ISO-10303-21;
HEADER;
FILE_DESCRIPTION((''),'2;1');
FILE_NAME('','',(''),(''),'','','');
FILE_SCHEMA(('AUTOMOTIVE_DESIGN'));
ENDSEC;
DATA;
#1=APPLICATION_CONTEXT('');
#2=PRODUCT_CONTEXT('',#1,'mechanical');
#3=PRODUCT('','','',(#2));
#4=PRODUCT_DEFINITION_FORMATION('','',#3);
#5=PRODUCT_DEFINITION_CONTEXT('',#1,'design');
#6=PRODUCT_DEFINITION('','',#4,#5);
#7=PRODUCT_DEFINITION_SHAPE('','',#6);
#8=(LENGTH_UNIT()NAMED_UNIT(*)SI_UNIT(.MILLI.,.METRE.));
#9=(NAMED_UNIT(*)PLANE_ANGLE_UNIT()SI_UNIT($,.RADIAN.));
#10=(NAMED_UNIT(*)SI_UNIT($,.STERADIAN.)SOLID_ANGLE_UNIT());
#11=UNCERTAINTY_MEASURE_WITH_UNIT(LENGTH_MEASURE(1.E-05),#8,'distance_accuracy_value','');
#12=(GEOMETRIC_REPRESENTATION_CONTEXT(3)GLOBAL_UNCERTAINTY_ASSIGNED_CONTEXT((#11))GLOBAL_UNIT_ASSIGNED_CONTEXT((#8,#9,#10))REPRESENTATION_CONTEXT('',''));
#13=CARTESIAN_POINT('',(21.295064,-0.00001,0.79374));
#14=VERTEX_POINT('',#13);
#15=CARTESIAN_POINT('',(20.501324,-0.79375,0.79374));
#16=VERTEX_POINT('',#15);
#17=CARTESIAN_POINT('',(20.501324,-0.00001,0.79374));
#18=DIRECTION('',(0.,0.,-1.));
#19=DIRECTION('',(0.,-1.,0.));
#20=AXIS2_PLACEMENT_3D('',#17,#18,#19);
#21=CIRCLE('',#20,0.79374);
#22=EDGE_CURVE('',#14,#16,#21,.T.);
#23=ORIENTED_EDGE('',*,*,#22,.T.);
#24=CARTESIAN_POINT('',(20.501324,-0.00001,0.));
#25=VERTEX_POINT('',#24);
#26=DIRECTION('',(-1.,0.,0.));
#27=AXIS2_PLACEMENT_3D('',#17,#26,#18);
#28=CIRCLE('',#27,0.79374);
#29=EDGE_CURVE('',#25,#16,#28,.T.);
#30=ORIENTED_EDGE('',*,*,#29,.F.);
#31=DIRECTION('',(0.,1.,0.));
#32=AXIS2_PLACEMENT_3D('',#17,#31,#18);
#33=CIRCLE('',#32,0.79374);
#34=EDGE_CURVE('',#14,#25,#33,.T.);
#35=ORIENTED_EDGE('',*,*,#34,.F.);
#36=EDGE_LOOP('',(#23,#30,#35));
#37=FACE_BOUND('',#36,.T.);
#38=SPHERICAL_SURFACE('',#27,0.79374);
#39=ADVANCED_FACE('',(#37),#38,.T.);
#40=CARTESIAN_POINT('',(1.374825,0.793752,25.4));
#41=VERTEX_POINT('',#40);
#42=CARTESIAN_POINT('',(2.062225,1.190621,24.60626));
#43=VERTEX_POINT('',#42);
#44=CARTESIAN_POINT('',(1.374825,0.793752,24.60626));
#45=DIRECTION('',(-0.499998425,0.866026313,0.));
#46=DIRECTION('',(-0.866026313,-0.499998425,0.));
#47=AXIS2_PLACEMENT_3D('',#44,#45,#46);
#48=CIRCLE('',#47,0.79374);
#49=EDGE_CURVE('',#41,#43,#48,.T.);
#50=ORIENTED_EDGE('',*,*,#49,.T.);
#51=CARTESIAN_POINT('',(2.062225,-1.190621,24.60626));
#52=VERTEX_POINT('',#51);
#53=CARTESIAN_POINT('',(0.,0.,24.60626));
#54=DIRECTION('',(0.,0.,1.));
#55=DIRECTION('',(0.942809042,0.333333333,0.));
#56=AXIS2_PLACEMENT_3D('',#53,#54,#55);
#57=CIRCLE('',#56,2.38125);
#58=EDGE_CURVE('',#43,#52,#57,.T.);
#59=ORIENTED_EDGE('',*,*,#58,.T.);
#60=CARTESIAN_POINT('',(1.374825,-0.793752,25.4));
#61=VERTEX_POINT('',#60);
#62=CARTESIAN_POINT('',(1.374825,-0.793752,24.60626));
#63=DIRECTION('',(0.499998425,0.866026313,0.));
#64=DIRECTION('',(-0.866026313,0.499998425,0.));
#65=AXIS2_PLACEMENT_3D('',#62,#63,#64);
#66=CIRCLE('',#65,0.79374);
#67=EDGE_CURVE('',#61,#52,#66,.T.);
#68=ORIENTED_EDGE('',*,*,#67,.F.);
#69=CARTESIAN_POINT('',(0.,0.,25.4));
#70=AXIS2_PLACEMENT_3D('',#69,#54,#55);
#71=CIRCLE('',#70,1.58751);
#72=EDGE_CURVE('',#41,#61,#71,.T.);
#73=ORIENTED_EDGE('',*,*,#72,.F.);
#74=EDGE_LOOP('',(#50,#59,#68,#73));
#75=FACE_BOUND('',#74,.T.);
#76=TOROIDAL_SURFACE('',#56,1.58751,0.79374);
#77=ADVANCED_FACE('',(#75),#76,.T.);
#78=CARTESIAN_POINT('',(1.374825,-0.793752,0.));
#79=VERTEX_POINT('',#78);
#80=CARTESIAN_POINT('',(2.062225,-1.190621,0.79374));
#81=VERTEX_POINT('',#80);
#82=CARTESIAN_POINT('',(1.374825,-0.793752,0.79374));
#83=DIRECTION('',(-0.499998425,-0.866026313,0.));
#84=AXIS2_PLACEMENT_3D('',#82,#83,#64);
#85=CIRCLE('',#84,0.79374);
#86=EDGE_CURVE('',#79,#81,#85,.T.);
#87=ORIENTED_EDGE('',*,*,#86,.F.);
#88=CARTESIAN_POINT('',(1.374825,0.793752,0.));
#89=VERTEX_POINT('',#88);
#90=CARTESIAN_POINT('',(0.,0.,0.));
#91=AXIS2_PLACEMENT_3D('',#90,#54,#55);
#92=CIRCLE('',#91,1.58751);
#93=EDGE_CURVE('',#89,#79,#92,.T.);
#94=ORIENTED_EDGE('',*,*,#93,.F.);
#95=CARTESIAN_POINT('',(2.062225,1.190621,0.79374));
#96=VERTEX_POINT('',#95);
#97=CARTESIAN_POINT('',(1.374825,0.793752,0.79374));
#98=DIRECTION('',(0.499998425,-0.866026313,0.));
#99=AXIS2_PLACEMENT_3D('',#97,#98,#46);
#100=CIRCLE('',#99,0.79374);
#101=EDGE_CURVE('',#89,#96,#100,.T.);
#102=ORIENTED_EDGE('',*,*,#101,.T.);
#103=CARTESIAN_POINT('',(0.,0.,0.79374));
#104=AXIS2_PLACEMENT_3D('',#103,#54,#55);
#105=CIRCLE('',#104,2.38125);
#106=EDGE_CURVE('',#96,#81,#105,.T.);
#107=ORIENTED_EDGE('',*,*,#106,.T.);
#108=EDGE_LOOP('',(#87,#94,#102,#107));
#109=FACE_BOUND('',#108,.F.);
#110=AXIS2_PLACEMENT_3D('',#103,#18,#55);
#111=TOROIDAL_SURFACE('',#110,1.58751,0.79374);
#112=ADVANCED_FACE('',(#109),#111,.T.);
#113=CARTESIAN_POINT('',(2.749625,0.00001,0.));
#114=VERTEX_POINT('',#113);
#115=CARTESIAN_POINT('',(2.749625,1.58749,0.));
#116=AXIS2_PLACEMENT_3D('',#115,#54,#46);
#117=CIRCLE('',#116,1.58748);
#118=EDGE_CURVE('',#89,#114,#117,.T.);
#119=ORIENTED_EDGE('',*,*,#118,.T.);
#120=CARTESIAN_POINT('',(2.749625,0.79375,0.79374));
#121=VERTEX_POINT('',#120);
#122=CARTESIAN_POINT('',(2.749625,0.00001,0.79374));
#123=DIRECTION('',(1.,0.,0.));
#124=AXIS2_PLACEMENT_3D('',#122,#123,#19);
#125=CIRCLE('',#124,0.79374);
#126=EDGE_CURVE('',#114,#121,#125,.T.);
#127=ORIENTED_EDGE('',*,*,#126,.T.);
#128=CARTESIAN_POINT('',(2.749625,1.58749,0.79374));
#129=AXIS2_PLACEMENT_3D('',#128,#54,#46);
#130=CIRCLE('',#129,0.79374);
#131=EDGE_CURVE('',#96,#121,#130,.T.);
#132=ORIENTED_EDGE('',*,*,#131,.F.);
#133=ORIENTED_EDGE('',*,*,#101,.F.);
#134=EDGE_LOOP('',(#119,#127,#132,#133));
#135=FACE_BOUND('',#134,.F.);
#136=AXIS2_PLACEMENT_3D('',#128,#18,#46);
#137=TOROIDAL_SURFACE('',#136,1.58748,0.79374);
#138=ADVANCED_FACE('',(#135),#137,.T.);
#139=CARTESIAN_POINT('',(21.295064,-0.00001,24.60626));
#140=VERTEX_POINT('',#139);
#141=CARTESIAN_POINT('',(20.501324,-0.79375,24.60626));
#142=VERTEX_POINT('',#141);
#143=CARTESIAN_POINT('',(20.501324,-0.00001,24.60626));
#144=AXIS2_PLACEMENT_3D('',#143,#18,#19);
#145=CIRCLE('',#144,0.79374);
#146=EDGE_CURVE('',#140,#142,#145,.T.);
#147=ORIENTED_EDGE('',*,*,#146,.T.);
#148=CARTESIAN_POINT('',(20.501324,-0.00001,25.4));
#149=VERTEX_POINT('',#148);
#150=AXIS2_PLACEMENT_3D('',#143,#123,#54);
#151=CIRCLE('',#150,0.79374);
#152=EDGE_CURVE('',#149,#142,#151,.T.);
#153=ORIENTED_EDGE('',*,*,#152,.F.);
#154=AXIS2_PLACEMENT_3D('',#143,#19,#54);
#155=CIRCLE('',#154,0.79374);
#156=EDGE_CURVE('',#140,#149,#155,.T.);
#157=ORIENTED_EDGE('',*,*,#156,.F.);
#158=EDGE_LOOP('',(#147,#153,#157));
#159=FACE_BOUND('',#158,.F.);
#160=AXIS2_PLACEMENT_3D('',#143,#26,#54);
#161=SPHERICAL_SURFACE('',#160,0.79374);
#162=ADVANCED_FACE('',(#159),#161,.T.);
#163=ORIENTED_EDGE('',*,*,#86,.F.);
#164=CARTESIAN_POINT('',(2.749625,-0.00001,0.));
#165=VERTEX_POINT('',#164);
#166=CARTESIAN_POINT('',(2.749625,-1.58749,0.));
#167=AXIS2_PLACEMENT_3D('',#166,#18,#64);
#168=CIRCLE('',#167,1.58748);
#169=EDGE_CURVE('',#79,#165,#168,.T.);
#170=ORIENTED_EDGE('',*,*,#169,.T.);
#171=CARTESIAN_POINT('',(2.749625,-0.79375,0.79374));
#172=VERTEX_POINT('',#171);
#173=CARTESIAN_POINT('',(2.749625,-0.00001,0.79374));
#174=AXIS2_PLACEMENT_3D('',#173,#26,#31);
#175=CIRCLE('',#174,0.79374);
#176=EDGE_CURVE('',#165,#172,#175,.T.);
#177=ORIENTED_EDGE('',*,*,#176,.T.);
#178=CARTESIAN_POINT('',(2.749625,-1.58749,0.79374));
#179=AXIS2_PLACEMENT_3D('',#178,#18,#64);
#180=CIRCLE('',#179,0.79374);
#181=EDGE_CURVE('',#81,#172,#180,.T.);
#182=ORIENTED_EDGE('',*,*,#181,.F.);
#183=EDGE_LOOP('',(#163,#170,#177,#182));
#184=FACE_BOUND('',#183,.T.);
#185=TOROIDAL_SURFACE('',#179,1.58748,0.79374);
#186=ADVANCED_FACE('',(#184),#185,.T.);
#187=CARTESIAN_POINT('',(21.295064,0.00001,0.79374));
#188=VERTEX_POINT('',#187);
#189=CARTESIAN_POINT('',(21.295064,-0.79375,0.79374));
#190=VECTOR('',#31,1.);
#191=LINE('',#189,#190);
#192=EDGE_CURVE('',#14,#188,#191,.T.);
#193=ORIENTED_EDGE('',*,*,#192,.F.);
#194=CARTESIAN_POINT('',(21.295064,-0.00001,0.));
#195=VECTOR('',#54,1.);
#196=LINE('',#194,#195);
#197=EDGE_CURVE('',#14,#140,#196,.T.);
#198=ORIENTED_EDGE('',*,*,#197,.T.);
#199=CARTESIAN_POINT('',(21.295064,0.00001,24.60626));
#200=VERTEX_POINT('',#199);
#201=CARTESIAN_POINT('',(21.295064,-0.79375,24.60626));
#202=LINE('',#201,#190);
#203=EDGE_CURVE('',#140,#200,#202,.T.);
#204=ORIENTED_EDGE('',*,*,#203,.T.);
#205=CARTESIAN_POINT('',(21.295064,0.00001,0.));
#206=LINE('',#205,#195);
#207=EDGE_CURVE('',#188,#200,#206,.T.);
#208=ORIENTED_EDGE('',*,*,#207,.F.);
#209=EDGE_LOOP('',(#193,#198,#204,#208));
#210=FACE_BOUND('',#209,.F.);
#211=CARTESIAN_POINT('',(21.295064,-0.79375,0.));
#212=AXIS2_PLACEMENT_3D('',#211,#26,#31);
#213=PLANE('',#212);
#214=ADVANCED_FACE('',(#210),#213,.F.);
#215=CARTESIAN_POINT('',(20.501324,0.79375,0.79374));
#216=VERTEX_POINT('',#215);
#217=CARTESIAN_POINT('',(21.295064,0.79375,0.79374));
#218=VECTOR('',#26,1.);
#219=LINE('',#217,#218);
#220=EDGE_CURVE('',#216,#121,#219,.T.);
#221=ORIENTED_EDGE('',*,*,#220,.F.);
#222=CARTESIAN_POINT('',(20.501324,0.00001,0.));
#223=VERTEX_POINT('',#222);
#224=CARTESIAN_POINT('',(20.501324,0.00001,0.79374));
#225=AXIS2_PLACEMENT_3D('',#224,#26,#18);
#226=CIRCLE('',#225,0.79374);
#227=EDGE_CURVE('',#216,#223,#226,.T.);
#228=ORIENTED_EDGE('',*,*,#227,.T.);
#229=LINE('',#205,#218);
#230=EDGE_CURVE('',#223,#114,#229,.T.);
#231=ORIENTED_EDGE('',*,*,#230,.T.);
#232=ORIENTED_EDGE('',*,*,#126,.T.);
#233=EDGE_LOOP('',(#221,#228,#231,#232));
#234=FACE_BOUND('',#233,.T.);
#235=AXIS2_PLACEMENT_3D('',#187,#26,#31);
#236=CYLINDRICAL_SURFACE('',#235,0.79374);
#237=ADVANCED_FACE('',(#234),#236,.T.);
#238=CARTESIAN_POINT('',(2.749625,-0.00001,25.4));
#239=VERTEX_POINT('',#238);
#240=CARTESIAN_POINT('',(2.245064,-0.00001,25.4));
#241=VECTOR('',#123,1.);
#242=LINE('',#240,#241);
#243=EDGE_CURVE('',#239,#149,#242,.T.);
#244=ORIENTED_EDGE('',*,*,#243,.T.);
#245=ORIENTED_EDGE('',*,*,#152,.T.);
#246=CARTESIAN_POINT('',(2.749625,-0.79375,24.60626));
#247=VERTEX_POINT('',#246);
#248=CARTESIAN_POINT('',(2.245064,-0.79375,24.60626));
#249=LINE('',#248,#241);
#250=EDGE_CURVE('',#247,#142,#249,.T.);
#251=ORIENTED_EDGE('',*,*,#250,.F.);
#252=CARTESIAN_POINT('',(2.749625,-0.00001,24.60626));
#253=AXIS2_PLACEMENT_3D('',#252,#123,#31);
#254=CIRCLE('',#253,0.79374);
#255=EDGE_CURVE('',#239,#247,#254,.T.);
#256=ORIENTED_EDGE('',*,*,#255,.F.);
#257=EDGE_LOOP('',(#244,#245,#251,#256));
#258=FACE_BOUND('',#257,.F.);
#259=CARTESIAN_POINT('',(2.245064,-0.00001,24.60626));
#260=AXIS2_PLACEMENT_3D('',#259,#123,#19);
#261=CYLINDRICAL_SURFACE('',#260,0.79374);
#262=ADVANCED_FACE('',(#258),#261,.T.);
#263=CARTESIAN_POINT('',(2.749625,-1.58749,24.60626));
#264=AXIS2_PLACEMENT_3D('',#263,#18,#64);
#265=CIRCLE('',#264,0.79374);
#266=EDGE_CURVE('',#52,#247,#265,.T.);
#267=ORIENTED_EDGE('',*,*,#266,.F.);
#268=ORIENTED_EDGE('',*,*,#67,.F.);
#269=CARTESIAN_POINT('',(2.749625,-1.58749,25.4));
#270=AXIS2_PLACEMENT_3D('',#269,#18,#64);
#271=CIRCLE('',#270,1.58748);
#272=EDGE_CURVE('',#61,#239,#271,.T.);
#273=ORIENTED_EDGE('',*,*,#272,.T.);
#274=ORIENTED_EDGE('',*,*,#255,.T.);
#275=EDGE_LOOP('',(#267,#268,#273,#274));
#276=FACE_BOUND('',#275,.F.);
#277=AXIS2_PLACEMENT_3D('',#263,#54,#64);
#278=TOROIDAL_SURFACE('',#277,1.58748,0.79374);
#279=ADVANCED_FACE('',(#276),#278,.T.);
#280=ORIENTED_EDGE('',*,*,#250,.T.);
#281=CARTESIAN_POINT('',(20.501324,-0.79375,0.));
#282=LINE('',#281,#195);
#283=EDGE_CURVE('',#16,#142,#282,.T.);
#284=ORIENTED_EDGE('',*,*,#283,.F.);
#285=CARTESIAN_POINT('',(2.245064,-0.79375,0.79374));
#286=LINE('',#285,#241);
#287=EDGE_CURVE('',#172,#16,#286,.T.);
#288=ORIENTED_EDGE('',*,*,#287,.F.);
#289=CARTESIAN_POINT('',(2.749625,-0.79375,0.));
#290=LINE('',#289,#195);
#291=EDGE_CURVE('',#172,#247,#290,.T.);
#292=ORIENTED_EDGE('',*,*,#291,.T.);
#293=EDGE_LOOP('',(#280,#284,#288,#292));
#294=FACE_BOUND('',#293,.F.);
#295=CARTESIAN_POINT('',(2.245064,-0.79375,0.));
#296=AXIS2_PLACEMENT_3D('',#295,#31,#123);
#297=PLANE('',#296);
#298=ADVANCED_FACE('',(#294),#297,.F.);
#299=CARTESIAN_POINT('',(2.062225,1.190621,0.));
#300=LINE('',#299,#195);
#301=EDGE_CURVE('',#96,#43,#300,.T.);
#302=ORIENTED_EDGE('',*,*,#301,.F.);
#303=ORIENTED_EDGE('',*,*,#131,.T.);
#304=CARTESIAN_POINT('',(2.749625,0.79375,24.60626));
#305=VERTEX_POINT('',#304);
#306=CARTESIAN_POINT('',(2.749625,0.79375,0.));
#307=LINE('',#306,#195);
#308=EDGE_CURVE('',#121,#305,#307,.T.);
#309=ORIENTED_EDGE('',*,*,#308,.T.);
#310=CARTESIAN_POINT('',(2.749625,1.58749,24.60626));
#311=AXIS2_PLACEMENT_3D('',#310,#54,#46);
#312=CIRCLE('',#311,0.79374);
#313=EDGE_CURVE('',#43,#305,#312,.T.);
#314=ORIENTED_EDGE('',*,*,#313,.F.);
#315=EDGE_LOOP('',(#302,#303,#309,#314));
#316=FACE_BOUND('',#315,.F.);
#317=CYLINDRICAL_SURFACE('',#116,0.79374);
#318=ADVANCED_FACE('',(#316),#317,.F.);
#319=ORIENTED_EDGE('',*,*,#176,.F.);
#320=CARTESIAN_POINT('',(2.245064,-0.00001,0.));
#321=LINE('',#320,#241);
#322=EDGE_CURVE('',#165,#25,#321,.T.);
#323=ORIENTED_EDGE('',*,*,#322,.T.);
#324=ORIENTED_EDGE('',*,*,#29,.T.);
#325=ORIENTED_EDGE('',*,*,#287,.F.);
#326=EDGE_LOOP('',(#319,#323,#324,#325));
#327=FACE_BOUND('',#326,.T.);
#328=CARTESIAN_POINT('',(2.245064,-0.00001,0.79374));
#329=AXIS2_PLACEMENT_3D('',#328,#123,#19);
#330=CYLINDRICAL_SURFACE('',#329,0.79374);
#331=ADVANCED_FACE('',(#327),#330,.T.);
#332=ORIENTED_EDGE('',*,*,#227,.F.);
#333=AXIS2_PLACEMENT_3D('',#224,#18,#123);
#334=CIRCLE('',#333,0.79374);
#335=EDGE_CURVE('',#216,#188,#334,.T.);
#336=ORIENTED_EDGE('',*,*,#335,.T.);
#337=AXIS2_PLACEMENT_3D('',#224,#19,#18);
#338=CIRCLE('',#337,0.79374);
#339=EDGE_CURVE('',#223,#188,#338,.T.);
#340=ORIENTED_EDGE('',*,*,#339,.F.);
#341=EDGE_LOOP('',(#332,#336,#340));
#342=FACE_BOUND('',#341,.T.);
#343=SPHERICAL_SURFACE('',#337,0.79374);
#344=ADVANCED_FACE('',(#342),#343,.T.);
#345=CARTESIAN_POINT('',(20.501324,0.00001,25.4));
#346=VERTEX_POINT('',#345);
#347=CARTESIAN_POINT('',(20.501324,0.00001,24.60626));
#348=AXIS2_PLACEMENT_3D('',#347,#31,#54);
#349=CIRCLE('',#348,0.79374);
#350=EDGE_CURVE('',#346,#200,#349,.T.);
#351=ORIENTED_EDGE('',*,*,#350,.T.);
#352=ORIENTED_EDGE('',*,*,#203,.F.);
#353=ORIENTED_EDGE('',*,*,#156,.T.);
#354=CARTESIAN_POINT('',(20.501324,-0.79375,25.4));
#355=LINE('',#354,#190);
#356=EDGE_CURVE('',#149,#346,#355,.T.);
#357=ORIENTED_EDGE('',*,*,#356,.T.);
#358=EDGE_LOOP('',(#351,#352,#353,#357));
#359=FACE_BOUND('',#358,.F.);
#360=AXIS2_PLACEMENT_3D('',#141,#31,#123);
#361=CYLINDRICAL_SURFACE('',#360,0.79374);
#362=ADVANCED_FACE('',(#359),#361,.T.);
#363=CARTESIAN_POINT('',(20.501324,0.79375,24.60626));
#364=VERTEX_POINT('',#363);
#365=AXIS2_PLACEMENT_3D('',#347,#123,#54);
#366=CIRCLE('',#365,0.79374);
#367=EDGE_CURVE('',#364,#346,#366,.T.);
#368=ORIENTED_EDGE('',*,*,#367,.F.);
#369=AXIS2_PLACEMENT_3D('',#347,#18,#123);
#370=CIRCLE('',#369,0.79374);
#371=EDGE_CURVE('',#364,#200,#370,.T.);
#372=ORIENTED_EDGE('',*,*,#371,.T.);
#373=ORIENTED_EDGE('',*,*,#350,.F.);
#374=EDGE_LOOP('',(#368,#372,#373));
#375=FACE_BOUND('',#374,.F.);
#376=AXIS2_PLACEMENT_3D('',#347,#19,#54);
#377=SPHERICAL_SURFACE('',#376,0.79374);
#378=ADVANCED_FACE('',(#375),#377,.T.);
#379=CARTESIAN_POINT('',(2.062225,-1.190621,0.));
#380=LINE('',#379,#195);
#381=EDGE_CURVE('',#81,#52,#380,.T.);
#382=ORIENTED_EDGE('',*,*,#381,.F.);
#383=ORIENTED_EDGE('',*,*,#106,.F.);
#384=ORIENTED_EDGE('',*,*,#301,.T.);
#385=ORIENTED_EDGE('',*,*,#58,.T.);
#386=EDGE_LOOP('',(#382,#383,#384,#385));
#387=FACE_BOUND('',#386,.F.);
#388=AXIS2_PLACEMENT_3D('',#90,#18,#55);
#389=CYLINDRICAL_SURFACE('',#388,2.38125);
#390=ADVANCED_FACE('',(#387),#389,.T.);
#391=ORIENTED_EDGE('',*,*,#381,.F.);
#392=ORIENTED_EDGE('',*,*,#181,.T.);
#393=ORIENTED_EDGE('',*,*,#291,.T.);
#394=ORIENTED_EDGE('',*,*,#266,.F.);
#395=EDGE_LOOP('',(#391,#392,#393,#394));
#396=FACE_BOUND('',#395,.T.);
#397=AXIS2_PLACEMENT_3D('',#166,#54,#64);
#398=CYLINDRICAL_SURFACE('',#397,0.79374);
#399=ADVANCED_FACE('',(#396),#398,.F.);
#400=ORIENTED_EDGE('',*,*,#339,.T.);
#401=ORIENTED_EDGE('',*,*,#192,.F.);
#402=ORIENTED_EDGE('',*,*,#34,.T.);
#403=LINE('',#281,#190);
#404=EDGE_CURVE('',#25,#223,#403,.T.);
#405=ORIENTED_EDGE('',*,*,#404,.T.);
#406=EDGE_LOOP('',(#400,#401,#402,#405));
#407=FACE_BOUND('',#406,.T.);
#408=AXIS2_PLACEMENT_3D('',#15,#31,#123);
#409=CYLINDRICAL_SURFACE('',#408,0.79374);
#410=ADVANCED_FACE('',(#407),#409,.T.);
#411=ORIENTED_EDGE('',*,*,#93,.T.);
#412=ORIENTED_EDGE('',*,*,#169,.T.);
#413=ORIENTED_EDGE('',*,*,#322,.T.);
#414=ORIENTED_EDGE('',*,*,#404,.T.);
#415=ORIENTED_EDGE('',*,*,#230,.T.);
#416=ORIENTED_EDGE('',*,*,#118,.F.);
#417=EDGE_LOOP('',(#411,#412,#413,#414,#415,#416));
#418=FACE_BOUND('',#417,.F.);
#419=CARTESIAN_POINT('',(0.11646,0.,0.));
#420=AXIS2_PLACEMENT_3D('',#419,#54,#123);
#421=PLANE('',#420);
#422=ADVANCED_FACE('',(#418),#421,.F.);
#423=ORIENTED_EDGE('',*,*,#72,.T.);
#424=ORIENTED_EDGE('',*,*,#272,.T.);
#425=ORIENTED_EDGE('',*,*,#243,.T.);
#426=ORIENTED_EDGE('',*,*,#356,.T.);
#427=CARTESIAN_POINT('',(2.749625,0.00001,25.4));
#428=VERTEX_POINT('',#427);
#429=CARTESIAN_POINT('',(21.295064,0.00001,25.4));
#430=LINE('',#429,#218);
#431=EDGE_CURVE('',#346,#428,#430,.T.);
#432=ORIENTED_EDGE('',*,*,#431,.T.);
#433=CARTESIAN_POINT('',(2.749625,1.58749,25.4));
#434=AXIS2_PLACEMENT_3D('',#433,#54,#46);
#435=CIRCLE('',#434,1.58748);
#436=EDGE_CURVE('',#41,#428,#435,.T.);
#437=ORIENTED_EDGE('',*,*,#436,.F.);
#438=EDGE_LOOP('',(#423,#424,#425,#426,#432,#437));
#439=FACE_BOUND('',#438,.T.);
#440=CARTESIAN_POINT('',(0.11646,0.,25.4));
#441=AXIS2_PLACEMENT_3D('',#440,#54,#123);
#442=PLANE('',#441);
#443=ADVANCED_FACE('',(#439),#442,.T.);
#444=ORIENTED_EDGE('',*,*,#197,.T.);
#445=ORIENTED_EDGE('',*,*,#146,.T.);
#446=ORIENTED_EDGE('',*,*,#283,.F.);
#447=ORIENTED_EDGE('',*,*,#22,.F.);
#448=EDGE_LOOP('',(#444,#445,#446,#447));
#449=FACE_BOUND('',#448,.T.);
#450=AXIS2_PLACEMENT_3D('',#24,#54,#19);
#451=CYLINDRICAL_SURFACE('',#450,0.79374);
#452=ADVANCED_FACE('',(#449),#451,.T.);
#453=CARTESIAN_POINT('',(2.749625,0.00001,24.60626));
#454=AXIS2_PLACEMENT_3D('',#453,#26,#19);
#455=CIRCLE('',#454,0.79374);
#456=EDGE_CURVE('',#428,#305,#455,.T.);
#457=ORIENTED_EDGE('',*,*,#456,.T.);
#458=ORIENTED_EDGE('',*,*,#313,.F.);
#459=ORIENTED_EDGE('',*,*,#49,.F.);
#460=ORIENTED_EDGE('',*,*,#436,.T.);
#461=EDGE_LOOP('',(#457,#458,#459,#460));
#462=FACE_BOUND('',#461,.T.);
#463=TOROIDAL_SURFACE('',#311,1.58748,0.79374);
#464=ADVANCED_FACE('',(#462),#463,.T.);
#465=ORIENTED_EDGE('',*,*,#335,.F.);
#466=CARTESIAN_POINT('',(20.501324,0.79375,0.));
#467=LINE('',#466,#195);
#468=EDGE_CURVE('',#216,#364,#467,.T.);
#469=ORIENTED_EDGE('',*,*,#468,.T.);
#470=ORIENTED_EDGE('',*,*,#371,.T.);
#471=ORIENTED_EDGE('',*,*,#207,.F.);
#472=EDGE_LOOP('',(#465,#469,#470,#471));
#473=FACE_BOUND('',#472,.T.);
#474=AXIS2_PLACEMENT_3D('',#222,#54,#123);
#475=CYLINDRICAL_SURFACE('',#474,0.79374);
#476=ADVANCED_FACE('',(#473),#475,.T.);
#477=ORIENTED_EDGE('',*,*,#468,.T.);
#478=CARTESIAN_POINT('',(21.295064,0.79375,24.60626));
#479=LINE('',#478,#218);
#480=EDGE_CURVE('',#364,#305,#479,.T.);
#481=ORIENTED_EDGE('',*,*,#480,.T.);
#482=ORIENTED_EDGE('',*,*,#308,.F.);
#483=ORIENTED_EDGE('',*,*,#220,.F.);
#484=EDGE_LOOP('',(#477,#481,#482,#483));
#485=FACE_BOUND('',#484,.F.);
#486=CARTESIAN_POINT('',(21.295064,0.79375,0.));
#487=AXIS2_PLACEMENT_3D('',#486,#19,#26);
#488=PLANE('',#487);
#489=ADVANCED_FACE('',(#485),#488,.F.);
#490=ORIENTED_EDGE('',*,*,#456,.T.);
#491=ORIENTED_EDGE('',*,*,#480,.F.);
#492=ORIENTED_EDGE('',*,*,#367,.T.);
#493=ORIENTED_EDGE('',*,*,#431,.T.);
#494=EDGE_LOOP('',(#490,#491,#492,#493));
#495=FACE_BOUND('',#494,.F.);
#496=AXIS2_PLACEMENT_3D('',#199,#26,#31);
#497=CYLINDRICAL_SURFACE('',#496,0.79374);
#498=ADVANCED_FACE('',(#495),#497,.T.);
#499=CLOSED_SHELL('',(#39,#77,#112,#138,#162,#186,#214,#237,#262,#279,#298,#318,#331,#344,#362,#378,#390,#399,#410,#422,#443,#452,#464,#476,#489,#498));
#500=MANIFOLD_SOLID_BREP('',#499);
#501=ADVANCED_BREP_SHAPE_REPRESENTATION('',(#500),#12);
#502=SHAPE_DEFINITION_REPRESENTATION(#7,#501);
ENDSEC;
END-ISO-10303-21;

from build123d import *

# Parameters (mm, degrees)
F1_DEPTH = 25.4
F2_R     = 0.79374


# Not quite as in the source:
# - a fillet or chamfer is up to 0.001 mm smaller than in the source, because OpenCascade refuses the exact size
# - a feature names something its author has since deleted; it is built from what else it names


with BuildPart() as f1:
    # F0 (on Top) → F1 (new body)
    with BuildSketch(Plane.XY):
        with BuildLine():
            ThreePointArc((2.2450640303, -0.79375), (2.3469565702, -0.4026740868), (2.38125, 0))
            ThreePointArc((2.38125, 0), (2.3469565702, 0.4026740868), (2.2450640303, 0.79375))
            ThreePointArc((2.2450640303, 0.79375), (-2.38125, 0), (2.2450640303, -0.79375))
        make_face()
        with BuildLine():
            ThreePointArc((2.2450640303, 0.79375), (2.3469565702, 0.4026740868), (2.38125, 0))
            ThreePointArc((2.38125, 0), (2.3469565702, -0.4026740868), (2.2450640303, -0.79375))
            Line((2.2450640303, -0.79375), (21.2950640303, -0.79375))
            Line((21.2950640303, -0.79375), (21.2950640303, 0))
            Line((21.2950640303, 0), (21.2950640303, 0.79375))
            Line((21.2950640303, 0.79375), (2.2450640303, 0.79375))
        make_face()
    extrude(amount=F1_DEPTH)

    # F2 (radius 0.79375 in the source; OpenCascade refuses exactly that, so slightly less here)
    f2_edges = [f1.edges().sort_by_distance(p)[0] for p in [
        (-2.38125, 0, 25.4),
        (11.770064, -0.79375, 25.4),
        (21.295064, 0, 25.4),
        (11.770064, 0.79375, 25.4),
        (-2.38125, 0, 0),
        (11.770064, -0.79375, 0),
        (21.295064, 0, 0),
        (11.770064, 0.79375, 0),
        (21.295064, 0.79375, 12.7),
        (2.245064, 0.79375, 12.7),
        (2.245064, -0.79375, 12.7),
        (21.295064, -0.79375, 12.7),
    ]]
    fillet(f2_edges, radius=F2_R)


solid = f1.part
